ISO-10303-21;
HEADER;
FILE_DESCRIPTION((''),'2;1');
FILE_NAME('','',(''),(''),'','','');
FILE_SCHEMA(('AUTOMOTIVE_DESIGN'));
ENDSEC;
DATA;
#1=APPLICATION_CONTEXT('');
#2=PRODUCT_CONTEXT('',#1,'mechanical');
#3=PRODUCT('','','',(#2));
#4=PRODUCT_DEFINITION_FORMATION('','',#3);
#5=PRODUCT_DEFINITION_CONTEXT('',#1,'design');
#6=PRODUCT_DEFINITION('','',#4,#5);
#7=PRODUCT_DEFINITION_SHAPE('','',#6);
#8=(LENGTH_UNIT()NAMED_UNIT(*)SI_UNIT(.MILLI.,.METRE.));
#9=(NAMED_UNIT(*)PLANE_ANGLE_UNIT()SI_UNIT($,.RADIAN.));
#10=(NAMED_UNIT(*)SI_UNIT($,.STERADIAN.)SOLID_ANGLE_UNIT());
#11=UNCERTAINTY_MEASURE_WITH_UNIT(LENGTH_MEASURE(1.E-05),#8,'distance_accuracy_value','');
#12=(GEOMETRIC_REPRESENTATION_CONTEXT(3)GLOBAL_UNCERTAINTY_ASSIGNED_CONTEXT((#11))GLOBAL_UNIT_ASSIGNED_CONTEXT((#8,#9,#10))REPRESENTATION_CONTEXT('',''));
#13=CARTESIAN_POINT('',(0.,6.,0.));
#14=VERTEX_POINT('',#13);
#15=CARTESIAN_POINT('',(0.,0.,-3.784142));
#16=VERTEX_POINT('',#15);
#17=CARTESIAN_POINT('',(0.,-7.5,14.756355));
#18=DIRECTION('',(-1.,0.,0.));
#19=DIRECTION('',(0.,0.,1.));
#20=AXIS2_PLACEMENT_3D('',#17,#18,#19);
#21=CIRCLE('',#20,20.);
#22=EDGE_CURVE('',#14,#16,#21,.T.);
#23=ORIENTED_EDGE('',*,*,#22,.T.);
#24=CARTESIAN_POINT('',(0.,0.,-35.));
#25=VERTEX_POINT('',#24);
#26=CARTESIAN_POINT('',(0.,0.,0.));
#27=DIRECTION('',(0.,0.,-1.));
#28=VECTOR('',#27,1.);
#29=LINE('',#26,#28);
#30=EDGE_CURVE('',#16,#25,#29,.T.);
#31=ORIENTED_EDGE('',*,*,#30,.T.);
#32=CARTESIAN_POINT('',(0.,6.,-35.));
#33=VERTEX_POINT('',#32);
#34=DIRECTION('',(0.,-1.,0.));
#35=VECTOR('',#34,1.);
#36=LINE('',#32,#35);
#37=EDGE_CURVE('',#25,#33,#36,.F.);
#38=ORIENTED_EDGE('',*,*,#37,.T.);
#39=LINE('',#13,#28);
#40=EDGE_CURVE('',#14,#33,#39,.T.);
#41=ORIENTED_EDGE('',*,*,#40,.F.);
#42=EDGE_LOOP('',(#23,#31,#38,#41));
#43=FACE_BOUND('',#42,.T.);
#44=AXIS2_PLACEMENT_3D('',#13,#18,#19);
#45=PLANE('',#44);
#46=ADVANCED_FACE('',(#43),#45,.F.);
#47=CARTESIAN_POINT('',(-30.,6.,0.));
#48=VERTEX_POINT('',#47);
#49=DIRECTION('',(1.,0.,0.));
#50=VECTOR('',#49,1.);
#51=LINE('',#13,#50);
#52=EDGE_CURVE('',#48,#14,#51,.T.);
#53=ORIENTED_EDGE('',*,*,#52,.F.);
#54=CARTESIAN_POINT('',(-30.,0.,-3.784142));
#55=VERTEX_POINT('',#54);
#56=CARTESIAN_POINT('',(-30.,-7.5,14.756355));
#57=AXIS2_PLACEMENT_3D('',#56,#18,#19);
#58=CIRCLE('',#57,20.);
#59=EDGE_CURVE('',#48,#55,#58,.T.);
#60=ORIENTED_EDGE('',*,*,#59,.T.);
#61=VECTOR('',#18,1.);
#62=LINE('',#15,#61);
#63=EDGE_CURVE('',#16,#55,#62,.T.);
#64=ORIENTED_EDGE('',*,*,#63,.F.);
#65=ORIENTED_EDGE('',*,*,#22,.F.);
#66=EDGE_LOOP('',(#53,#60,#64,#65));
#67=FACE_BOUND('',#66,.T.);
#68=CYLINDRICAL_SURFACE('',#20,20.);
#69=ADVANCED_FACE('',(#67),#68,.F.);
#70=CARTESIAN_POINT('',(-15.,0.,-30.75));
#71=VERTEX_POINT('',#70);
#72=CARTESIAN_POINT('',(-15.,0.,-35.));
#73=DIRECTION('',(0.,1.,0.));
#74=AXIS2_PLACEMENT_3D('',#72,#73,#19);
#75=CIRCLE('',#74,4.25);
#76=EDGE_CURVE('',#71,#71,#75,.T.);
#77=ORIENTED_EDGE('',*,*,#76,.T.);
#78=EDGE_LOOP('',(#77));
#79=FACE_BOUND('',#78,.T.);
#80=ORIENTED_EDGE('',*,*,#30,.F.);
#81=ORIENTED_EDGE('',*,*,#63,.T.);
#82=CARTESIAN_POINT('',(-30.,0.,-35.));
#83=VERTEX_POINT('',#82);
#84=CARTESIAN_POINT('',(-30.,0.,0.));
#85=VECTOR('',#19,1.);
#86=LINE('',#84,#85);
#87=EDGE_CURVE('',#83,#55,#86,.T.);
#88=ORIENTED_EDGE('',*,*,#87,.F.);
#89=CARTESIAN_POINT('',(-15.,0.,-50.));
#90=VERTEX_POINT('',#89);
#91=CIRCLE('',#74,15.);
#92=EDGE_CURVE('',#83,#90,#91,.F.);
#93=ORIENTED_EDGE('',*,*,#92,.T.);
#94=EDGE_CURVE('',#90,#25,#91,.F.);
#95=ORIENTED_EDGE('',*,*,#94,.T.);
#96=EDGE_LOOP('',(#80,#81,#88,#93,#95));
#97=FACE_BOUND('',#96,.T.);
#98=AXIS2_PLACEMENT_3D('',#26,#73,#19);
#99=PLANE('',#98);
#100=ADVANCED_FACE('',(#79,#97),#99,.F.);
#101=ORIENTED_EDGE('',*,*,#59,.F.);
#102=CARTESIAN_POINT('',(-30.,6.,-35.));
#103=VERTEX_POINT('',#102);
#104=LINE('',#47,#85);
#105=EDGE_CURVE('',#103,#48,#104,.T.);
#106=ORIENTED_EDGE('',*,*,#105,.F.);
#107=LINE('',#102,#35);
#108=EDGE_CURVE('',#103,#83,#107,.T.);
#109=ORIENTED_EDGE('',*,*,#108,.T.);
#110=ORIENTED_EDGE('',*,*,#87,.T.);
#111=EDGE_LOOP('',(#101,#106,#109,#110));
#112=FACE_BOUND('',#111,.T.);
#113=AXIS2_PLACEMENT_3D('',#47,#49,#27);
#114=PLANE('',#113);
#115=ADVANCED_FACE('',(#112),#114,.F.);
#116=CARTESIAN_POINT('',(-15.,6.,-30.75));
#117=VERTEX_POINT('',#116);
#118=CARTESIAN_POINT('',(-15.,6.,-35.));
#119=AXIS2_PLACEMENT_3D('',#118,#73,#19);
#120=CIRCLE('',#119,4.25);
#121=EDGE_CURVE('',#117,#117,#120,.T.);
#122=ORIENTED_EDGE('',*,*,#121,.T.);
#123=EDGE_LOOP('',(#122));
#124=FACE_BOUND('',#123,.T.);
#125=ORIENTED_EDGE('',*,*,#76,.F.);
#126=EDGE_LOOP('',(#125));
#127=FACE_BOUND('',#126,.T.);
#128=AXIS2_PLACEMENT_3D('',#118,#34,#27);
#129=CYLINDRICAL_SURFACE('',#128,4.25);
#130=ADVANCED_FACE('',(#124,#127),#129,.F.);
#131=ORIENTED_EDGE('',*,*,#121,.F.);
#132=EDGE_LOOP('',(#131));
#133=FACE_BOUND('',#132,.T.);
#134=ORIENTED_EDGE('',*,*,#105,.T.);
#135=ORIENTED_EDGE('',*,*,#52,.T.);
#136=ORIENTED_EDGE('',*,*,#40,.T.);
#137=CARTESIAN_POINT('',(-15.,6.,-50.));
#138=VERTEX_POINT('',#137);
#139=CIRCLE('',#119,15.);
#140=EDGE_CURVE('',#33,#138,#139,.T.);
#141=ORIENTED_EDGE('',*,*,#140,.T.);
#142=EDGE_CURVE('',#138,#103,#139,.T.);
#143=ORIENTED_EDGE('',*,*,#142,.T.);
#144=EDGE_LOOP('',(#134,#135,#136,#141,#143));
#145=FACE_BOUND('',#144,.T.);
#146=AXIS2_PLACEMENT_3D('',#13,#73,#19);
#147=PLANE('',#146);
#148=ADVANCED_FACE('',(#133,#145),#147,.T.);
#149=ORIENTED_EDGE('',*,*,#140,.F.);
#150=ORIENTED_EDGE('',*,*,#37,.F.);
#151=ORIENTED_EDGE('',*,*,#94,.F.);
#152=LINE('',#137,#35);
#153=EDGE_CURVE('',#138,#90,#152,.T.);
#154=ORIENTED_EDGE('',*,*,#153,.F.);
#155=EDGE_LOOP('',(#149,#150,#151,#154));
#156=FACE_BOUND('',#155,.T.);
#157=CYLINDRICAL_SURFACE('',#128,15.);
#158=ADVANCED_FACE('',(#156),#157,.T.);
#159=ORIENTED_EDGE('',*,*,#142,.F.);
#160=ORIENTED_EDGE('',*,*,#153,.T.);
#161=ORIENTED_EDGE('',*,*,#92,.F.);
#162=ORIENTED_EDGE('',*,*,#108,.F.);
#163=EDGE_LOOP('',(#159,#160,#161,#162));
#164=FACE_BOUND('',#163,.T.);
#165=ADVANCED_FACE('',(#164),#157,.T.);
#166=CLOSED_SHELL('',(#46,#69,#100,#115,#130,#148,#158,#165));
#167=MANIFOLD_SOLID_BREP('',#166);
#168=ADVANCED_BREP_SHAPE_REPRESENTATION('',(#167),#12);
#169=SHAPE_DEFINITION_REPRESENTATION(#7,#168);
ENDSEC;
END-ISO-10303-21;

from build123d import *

# Parameters (mm, degrees)
SKETCH1_W           = 30
SKETCH1_H           = 50
SKETCH1_R           = 4.25
BOSS_EXTRUDE1_DEPTH = 6
FILLET1_R           = 15
SKETCH2_R           = 20
CUT_EXTRUDE1_DEPTH  = 59.617403559


with BuildPart() as part:
    # Sketch1 → Boss-Extrude1 (new body)
    with BuildSketch(Plane(origin=(0, 0, 0), x_dir=(1, 0, 0), z_dir=(0, 1, 0))):
        with Locations((-15, 25)):
            Rectangle(SKETCH1_W, SKETCH1_H)
        with Locations(Location((-15, 35, 0), (0, 0, 270))):
            Circle(SKETCH1_R, mode=Mode.SUBTRACT)
    extrude(amount=BOSS_EXTRUDE1_DEPTH)

    # Fillet1
    fillet1_edges = [part.edges().sort_by_distance(p)[0] for p in [
        (-30, 3, -50),
        (0, 3, -50),
    ]]
    fillet(fillet1_edges, radius=FILLET1_R - 0.0001)  # a hair under: the kernel refuses the full size

    # Sketch2 → Cut-Extrude1 (cut, through all)
    with BuildSketch(Plane.ZY.offset(30)):
        with Locations((14.756354563, -7.5)):
            Circle(SKETCH2_R)
    extrude(amount=-CUT_EXTRUDE1_DEPTH, mode=Mode.SUBTRACT)


solid = part.part
